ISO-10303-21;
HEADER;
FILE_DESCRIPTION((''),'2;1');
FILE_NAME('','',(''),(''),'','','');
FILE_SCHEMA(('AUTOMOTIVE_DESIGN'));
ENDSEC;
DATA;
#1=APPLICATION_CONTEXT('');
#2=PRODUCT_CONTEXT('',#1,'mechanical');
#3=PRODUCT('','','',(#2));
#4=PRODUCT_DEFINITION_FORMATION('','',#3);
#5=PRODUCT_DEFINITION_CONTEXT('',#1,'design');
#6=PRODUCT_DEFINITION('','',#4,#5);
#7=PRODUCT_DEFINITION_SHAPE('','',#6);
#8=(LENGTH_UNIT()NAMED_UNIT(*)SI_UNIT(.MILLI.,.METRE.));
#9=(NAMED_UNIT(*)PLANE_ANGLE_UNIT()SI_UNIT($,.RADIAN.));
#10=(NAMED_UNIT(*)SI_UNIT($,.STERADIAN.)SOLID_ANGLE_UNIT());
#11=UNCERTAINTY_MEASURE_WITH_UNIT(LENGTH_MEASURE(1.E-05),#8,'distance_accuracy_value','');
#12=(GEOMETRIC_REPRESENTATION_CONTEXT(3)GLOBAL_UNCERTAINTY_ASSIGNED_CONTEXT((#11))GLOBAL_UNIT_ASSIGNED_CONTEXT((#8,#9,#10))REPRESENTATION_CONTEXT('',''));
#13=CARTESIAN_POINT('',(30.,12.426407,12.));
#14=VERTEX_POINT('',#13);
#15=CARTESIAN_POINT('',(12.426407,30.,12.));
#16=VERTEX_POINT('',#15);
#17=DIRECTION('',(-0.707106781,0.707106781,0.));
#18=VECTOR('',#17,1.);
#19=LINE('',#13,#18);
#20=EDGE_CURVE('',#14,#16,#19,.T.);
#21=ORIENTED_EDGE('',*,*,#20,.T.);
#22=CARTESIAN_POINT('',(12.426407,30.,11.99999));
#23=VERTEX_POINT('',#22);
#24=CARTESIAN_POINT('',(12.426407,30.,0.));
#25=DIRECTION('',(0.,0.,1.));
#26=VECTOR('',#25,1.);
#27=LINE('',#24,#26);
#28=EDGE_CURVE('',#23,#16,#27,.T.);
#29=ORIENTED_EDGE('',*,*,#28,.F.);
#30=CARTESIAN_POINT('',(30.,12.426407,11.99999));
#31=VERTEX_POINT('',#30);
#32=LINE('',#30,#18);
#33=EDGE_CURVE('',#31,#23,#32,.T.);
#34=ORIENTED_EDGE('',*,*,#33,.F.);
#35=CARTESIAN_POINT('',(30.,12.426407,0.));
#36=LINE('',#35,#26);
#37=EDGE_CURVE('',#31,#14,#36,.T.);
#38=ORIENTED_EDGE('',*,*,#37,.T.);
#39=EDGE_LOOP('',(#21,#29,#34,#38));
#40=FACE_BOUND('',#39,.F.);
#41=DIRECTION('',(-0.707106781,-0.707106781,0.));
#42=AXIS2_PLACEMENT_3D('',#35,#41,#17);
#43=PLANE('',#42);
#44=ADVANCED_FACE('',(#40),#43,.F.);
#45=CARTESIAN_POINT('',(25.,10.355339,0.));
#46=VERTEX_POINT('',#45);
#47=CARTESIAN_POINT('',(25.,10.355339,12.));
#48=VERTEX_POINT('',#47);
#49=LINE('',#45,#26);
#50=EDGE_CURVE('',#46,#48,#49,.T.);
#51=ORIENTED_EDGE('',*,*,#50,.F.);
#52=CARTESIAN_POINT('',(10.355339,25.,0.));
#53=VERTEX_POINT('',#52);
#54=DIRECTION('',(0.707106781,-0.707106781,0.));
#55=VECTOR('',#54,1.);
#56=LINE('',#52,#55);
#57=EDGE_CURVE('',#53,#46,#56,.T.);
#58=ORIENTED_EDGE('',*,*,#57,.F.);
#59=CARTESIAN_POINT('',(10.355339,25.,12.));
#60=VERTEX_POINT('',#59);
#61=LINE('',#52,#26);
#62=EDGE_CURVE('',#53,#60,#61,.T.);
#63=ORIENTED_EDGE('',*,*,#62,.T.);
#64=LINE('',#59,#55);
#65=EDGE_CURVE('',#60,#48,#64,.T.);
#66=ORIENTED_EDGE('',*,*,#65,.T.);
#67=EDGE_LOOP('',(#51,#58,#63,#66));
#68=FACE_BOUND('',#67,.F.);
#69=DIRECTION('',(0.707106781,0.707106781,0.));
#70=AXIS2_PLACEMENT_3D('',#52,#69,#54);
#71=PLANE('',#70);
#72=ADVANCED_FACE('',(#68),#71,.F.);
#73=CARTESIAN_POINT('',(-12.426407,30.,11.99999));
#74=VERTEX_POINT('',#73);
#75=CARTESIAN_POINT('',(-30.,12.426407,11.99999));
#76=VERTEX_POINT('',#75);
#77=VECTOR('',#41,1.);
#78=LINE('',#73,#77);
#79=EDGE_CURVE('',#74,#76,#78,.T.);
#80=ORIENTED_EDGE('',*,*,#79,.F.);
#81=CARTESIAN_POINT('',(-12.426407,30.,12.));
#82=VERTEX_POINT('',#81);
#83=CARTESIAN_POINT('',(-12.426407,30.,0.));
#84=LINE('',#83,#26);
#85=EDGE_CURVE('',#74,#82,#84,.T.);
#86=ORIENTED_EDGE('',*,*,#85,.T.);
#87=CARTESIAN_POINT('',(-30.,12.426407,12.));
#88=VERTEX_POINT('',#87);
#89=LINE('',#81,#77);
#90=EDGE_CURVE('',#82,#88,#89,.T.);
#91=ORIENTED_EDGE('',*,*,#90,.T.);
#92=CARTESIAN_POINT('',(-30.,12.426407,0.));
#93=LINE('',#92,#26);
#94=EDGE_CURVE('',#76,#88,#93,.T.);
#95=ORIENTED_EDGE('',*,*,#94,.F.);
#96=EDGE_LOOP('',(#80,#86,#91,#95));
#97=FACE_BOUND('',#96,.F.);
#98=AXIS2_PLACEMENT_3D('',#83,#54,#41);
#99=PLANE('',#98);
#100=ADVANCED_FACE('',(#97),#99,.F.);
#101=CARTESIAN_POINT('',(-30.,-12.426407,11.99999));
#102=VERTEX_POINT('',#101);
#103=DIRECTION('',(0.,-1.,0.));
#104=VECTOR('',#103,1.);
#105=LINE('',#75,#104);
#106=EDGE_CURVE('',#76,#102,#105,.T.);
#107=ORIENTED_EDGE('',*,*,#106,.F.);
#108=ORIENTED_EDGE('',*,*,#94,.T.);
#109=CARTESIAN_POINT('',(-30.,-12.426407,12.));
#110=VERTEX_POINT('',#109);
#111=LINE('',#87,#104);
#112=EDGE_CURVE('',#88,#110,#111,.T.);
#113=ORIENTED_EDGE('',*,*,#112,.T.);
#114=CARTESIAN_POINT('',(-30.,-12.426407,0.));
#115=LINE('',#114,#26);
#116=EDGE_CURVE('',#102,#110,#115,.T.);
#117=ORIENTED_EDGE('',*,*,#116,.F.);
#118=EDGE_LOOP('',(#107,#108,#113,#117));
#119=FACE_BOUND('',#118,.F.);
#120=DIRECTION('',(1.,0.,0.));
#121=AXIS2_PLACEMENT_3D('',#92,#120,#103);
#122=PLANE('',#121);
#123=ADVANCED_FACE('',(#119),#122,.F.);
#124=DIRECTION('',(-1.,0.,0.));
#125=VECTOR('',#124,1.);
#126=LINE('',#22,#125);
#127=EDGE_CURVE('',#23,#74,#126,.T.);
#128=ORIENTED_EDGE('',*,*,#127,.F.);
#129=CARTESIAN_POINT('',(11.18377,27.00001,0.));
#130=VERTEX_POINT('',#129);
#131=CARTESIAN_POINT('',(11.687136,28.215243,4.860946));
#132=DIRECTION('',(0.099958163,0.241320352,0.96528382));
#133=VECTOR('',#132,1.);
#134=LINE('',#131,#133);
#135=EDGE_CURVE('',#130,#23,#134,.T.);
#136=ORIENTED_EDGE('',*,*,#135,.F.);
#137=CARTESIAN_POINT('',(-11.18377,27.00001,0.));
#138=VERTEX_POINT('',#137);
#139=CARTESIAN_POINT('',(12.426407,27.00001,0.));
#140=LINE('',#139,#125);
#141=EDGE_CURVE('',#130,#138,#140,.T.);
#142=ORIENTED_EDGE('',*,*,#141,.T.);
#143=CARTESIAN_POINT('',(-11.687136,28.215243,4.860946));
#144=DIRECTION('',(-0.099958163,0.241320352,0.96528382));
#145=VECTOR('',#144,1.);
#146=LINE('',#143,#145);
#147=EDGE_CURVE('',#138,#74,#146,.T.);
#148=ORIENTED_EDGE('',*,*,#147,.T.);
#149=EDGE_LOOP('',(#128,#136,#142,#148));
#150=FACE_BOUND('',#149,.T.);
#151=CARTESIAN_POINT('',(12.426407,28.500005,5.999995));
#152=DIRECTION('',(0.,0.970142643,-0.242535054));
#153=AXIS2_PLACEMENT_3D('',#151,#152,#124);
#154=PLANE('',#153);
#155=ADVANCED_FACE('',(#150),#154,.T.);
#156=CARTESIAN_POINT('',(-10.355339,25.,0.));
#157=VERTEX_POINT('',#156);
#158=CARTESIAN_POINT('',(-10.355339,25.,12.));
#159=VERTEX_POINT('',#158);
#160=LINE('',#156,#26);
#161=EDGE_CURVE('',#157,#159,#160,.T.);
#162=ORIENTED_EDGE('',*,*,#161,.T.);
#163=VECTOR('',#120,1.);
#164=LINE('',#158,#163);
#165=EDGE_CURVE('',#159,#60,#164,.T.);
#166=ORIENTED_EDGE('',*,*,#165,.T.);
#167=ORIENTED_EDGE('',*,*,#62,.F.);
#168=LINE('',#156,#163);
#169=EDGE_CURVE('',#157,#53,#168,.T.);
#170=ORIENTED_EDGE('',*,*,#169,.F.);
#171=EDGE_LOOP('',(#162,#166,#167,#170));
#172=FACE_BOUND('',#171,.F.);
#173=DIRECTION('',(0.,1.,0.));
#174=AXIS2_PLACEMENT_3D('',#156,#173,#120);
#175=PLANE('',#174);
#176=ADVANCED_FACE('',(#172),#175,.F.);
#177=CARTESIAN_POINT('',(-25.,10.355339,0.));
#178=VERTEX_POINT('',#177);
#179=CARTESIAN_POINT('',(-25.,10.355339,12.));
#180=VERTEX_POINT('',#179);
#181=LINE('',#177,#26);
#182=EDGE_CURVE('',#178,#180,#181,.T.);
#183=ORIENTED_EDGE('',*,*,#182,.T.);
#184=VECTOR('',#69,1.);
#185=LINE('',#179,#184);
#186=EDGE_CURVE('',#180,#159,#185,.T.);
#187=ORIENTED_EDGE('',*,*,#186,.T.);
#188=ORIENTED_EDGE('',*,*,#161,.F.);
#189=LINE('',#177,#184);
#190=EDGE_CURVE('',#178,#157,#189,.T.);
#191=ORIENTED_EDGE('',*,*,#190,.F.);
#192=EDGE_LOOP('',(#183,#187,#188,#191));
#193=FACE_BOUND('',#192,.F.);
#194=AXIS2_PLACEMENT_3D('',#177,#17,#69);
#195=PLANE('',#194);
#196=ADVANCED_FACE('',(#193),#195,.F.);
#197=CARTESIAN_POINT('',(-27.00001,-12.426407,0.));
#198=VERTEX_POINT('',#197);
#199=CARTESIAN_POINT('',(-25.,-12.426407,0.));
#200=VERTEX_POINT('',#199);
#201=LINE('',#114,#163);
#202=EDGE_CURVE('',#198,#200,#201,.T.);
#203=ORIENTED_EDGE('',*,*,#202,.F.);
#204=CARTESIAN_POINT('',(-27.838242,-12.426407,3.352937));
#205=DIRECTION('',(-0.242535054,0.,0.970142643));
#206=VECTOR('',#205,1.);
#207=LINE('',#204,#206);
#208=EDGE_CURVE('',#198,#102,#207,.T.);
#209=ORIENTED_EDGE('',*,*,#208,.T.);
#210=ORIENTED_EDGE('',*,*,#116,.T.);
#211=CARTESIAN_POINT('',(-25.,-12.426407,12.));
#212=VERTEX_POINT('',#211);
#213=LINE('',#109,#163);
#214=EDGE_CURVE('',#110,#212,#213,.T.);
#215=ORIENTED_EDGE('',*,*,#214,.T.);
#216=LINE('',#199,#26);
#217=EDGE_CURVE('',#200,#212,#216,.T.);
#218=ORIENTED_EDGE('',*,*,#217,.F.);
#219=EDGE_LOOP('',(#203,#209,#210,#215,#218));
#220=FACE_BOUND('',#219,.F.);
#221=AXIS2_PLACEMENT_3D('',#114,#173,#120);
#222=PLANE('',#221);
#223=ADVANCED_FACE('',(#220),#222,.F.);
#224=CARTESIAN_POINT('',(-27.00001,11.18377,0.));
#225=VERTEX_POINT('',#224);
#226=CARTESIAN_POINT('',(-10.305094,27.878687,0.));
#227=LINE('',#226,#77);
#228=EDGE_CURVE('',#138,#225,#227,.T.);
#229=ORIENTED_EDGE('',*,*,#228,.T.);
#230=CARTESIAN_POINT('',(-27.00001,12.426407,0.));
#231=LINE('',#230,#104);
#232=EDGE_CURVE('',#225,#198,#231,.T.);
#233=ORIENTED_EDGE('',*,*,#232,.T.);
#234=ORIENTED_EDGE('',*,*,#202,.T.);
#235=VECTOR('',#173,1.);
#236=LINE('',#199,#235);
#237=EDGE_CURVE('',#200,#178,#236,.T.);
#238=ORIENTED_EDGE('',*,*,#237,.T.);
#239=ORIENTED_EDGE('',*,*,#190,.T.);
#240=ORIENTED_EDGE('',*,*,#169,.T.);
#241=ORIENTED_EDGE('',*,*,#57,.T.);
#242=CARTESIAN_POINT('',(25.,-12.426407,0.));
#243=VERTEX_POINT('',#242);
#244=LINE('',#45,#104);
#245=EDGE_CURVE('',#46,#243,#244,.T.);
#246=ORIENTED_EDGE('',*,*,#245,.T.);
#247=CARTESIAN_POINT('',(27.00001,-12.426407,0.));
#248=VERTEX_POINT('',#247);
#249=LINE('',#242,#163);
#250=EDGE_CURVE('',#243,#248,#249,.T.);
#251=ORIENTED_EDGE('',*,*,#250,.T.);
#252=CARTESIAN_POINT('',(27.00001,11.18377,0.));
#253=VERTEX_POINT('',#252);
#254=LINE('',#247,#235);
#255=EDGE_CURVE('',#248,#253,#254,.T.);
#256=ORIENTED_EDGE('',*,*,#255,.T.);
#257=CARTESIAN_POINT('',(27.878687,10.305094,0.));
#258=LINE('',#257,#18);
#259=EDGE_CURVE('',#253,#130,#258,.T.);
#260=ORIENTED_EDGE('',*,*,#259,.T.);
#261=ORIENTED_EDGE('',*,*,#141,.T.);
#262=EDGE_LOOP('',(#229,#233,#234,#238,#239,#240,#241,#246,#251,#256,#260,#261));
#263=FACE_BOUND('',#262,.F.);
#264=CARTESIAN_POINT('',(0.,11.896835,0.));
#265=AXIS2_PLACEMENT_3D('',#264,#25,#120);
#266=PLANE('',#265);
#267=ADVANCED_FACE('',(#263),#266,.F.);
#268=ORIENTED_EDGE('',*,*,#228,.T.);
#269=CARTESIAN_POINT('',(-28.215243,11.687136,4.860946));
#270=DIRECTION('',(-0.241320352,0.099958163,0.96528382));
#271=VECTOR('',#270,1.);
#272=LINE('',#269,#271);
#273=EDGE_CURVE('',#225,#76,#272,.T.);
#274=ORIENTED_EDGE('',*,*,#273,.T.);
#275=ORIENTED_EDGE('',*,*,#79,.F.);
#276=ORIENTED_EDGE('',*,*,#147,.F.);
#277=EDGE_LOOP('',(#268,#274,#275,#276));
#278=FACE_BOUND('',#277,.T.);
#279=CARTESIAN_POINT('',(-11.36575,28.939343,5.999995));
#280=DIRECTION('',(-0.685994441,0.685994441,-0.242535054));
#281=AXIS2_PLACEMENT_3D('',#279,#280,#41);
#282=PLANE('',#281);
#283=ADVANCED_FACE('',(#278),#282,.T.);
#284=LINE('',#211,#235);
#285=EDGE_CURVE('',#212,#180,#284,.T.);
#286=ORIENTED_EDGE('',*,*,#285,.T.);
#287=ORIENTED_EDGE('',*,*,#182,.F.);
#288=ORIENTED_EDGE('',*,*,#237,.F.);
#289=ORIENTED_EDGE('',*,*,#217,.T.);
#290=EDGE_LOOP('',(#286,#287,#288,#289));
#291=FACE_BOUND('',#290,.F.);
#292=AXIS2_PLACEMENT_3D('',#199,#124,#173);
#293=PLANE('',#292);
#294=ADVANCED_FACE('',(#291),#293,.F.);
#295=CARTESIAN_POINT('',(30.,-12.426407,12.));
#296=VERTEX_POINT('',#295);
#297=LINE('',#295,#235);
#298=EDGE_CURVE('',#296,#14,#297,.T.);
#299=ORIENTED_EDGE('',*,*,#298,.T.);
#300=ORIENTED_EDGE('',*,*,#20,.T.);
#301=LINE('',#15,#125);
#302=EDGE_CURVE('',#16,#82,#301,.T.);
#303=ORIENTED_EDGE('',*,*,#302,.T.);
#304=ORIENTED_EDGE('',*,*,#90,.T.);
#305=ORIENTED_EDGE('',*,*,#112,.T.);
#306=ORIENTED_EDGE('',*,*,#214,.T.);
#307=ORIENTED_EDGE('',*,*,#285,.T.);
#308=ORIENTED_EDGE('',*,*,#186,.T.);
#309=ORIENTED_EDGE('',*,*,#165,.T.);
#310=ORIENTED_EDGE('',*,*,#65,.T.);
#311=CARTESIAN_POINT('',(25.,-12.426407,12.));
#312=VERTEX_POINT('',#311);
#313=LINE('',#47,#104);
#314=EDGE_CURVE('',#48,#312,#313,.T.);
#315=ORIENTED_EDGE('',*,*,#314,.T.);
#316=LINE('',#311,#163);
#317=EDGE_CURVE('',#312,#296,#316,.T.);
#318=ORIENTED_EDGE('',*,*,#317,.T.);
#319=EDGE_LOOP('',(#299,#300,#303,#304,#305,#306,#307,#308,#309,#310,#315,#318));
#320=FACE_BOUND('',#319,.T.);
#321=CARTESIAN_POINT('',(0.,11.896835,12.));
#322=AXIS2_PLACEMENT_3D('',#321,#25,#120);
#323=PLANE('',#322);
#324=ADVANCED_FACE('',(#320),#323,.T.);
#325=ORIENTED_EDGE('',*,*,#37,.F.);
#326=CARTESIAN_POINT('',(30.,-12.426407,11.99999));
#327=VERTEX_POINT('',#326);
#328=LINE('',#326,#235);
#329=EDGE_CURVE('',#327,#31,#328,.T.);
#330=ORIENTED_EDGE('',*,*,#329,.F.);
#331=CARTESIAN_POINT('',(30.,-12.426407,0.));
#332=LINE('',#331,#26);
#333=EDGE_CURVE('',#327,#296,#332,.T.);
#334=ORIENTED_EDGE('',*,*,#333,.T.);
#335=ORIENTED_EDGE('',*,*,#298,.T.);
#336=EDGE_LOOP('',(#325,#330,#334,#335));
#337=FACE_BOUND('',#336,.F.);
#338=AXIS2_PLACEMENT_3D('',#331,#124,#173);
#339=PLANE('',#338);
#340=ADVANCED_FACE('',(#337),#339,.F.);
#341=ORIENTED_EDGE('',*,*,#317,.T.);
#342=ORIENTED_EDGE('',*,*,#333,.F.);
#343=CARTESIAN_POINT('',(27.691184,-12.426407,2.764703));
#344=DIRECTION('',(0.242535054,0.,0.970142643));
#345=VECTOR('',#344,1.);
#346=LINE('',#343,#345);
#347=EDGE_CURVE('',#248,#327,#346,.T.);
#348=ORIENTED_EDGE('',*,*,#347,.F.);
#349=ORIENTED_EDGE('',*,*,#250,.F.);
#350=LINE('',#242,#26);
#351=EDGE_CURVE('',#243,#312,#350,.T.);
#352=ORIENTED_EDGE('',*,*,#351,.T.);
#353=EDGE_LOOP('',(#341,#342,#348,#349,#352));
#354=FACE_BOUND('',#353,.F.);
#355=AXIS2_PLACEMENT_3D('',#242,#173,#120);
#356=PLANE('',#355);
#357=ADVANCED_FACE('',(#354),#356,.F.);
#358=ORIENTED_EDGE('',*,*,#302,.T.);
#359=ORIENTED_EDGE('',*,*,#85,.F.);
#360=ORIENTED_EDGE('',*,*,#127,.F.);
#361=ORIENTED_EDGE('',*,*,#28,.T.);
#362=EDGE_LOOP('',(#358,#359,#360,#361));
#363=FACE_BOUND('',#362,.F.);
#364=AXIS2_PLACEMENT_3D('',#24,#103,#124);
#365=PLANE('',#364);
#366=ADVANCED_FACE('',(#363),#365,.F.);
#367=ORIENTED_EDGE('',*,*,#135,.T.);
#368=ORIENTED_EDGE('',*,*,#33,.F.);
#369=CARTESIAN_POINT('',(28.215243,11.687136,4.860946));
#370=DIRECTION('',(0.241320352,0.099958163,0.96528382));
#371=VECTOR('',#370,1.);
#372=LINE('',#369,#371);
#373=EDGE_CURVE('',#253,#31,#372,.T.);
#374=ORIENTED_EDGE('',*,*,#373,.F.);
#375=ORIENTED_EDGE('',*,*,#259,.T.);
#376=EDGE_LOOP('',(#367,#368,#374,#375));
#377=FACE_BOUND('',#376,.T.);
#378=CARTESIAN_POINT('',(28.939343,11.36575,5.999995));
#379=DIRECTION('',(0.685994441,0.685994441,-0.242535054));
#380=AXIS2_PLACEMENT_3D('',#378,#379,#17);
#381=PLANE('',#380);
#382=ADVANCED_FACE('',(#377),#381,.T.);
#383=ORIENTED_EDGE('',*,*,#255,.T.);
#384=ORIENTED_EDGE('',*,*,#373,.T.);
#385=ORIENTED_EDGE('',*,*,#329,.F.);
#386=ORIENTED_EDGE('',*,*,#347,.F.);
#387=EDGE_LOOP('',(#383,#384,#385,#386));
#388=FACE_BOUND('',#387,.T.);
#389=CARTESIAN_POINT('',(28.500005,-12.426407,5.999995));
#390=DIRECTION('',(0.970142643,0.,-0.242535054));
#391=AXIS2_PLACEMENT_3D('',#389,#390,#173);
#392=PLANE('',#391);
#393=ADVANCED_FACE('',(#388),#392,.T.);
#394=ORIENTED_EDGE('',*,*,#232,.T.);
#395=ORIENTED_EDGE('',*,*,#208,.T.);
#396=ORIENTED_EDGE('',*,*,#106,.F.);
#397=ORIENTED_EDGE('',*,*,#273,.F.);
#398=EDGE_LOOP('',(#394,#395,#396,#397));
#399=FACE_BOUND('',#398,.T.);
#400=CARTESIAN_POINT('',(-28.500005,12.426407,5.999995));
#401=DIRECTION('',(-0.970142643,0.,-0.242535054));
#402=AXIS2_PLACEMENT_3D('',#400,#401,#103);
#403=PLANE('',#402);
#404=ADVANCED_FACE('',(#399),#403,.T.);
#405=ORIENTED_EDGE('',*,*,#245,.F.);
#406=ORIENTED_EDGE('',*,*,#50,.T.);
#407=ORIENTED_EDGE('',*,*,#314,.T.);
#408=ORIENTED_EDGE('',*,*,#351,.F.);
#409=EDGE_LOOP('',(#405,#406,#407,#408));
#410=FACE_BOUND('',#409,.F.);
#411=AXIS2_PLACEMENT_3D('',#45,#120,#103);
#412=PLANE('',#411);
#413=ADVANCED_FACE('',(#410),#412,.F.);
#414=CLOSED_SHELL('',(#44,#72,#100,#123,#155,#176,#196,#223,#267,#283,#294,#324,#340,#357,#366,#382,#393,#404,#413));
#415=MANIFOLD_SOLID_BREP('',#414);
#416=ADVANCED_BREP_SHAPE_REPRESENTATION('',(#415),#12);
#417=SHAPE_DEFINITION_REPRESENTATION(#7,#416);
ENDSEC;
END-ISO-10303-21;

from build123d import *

# Parameters (mm, degrees)
F1_DEPTH = 12
F2_SIZE2 = 11.99999
F2_SIZE  = 2.99999


# Not quite as in the source:
# - a fillet or chamfer is up to 0.001 mm smaller than in the source, because OpenCascade refuses the exact size


with BuildPart() as f1:
    # F0 (on Top) → F1 (new body)
    with BuildSketch(Plane.XY):
        Polygon((12.4264068712, 30), (-12.4264068712, 30), (-30, 12.4264068712), (-30, -12.4264068712), (-25, -12.4264068712), (-25, 10.3553390593), (-10.3553390593, 25), (10.3553390593, 25), (25, 10.3553390593), (25, -12.4264068712), (30, -12.4264068712), (30, 12.4264068712), align=None)
    extrude(amount=F1_DEPTH)

    # F2 (size 3 and 12 in the source; OpenCascade refuses exactly that, so slightly less here)
    f2_edges = [f1.edges().sort_by_distance(p)[0] for p in [
        (-30, 0, 0),
        (-21.213203, 21.213203, 0),
        (0, 30, 0),
        (21.213203, 21.213203, 0),
        (30, 0, 0),
    ]]
    f2_side = f1.faces().sort_by_distance((0, 29.265153, 0))[0]
    chamfer(f2_edges, length=F2_SIZE, length2=F2_SIZE2, reference=f2_side)


solid = f1.part
